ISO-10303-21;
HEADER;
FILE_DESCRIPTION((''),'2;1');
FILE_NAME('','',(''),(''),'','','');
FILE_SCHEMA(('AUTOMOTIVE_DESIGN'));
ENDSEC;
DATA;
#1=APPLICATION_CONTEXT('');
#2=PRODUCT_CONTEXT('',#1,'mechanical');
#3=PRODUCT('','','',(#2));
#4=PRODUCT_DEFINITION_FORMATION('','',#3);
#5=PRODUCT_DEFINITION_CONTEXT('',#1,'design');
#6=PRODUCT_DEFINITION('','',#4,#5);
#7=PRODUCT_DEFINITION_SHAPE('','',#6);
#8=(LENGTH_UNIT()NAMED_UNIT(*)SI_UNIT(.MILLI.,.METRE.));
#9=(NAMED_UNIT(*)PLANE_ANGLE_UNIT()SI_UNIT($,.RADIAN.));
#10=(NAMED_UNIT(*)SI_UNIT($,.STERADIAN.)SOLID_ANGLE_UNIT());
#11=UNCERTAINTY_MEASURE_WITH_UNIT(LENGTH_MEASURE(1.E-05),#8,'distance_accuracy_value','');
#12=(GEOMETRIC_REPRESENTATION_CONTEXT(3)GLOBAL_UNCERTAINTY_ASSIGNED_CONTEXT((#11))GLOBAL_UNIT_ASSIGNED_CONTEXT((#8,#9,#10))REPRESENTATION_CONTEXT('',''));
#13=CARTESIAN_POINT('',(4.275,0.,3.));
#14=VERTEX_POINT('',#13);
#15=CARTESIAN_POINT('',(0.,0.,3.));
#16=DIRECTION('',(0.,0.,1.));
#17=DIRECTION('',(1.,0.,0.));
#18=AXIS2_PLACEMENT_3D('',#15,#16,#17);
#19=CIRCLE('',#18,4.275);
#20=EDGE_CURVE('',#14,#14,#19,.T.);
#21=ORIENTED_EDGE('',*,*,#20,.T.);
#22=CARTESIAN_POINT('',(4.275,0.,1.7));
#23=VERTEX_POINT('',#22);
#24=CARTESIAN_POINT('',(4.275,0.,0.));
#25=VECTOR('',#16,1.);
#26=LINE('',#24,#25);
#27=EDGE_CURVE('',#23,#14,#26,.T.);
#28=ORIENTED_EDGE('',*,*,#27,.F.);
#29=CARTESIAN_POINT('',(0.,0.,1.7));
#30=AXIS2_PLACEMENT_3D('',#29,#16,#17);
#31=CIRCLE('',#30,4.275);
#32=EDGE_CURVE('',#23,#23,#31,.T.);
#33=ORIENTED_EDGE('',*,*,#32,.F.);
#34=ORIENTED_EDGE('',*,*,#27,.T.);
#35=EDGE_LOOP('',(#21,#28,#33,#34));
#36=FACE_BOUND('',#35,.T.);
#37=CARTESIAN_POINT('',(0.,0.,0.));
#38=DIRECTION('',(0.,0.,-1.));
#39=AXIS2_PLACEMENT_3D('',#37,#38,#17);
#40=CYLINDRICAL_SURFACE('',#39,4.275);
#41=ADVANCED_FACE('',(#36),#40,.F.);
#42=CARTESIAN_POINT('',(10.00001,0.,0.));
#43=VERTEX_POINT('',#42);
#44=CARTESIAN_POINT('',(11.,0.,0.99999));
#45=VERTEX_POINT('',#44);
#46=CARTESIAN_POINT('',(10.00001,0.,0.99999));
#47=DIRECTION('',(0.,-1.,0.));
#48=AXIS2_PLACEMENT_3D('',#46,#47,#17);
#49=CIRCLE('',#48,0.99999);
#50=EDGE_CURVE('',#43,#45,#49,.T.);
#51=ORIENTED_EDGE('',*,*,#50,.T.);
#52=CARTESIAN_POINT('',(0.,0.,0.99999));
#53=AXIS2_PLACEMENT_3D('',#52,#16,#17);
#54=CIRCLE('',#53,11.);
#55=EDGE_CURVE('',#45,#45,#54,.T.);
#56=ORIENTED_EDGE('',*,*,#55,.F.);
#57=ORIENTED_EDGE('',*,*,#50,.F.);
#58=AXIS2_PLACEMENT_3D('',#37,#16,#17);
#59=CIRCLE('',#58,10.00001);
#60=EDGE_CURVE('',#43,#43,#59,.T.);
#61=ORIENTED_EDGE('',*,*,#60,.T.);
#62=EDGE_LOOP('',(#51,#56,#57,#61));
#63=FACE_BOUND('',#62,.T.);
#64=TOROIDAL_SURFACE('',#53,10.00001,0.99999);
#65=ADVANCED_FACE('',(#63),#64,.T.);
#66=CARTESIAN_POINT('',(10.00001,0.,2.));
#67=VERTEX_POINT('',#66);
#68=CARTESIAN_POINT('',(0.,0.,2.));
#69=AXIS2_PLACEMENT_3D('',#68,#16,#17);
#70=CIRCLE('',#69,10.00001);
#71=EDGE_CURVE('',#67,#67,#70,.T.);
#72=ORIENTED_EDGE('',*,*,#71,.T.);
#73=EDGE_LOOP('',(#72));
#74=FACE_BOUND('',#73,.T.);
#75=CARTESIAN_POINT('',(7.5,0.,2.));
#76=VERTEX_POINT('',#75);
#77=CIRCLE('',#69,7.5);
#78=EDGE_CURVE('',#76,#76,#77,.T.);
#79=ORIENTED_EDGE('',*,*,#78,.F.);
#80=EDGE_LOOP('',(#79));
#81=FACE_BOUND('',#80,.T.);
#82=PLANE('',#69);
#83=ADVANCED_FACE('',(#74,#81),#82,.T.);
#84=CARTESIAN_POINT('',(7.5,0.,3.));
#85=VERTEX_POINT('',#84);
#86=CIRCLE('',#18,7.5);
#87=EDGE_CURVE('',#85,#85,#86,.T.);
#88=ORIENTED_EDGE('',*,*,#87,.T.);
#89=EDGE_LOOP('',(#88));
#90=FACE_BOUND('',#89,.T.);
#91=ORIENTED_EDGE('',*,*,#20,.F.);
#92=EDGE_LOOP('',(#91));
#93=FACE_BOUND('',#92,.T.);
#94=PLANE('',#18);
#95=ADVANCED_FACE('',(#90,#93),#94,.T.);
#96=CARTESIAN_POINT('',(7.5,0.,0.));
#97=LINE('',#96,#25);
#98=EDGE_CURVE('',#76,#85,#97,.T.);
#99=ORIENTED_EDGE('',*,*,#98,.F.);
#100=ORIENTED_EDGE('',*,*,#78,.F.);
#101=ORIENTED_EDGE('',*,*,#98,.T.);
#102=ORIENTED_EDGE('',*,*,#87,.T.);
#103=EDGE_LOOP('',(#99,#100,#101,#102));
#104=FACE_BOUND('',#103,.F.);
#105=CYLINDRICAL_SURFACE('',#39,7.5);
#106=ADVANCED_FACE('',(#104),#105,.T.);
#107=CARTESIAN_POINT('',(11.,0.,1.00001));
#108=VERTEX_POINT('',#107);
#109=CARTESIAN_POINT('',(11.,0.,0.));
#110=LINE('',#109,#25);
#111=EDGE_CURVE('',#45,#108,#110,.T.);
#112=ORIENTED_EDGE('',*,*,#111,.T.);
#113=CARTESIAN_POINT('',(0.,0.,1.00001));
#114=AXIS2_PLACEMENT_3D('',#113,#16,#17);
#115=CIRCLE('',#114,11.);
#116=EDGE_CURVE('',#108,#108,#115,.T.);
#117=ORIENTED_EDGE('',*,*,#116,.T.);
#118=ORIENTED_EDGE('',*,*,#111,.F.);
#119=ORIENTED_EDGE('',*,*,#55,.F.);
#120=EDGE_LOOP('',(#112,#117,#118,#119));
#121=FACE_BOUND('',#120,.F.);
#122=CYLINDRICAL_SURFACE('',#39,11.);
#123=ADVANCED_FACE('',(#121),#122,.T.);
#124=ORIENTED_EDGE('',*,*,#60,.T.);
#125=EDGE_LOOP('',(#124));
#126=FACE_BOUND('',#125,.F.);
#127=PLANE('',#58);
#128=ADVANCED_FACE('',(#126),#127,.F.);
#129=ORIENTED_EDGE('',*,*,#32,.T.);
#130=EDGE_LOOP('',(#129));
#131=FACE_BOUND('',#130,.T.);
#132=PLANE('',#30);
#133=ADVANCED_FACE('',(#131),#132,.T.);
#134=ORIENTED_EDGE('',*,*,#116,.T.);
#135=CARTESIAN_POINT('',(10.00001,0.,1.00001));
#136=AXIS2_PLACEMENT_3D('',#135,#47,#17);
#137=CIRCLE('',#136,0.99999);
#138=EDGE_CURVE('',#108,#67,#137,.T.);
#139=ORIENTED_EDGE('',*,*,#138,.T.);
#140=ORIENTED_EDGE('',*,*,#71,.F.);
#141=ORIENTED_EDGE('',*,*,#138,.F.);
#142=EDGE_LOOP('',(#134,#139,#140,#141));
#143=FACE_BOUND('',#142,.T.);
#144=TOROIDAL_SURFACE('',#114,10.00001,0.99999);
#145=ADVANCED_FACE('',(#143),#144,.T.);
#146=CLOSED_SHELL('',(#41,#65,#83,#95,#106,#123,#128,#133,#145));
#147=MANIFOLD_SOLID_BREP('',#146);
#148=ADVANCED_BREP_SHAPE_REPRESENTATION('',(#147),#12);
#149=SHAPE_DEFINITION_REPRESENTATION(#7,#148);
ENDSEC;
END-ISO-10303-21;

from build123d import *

# Parameters (mm, degrees)
F0_R     = 11
F0_R_2   = 7.5
F1_DEPTH = 2
F0_R_3   = 4.275
F2_DEPTH = 3
F3_DEPTH = 1.7
F4_R     = 0.99999


# Not quite as in the source:
# - a fillet or chamfer is up to 0.001 mm smaller than in the source, because OpenCascade refuses the exact size


with BuildPart() as f1:
    # F0 (on Top) → F1 (new body)
    with BuildSketch(Plane.XY):
        Circle(F0_R)
        Circle(F0_R_2, mode=Mode.SUBTRACT)
    extrude(amount=F1_DEPTH)

    # F0 (on Top) → F2 (join)
    with BuildSketch(Plane.XY):
        Circle(F0_R_2)
        Circle(F0_R_3, mode=Mode.SUBTRACT)
    extrude(amount=F2_DEPTH)

    # F0 (on Top) → F3 (join)
    with BuildSketch(Plane.XY):
        Circle(F0_R_3)
    extrude(amount=F3_DEPTH)

    # F4 (radius 1 in the source; OpenCascade refuses exactly that, so slightly less here)
    f4_edges = [f1.edges().sort_by_distance(p)[0] for p in [
        (-11, 0, 2),
        (-11, 0, 0),
    ]]
    fillet(f4_edges, radius=F4_R)


solid = f1.part
